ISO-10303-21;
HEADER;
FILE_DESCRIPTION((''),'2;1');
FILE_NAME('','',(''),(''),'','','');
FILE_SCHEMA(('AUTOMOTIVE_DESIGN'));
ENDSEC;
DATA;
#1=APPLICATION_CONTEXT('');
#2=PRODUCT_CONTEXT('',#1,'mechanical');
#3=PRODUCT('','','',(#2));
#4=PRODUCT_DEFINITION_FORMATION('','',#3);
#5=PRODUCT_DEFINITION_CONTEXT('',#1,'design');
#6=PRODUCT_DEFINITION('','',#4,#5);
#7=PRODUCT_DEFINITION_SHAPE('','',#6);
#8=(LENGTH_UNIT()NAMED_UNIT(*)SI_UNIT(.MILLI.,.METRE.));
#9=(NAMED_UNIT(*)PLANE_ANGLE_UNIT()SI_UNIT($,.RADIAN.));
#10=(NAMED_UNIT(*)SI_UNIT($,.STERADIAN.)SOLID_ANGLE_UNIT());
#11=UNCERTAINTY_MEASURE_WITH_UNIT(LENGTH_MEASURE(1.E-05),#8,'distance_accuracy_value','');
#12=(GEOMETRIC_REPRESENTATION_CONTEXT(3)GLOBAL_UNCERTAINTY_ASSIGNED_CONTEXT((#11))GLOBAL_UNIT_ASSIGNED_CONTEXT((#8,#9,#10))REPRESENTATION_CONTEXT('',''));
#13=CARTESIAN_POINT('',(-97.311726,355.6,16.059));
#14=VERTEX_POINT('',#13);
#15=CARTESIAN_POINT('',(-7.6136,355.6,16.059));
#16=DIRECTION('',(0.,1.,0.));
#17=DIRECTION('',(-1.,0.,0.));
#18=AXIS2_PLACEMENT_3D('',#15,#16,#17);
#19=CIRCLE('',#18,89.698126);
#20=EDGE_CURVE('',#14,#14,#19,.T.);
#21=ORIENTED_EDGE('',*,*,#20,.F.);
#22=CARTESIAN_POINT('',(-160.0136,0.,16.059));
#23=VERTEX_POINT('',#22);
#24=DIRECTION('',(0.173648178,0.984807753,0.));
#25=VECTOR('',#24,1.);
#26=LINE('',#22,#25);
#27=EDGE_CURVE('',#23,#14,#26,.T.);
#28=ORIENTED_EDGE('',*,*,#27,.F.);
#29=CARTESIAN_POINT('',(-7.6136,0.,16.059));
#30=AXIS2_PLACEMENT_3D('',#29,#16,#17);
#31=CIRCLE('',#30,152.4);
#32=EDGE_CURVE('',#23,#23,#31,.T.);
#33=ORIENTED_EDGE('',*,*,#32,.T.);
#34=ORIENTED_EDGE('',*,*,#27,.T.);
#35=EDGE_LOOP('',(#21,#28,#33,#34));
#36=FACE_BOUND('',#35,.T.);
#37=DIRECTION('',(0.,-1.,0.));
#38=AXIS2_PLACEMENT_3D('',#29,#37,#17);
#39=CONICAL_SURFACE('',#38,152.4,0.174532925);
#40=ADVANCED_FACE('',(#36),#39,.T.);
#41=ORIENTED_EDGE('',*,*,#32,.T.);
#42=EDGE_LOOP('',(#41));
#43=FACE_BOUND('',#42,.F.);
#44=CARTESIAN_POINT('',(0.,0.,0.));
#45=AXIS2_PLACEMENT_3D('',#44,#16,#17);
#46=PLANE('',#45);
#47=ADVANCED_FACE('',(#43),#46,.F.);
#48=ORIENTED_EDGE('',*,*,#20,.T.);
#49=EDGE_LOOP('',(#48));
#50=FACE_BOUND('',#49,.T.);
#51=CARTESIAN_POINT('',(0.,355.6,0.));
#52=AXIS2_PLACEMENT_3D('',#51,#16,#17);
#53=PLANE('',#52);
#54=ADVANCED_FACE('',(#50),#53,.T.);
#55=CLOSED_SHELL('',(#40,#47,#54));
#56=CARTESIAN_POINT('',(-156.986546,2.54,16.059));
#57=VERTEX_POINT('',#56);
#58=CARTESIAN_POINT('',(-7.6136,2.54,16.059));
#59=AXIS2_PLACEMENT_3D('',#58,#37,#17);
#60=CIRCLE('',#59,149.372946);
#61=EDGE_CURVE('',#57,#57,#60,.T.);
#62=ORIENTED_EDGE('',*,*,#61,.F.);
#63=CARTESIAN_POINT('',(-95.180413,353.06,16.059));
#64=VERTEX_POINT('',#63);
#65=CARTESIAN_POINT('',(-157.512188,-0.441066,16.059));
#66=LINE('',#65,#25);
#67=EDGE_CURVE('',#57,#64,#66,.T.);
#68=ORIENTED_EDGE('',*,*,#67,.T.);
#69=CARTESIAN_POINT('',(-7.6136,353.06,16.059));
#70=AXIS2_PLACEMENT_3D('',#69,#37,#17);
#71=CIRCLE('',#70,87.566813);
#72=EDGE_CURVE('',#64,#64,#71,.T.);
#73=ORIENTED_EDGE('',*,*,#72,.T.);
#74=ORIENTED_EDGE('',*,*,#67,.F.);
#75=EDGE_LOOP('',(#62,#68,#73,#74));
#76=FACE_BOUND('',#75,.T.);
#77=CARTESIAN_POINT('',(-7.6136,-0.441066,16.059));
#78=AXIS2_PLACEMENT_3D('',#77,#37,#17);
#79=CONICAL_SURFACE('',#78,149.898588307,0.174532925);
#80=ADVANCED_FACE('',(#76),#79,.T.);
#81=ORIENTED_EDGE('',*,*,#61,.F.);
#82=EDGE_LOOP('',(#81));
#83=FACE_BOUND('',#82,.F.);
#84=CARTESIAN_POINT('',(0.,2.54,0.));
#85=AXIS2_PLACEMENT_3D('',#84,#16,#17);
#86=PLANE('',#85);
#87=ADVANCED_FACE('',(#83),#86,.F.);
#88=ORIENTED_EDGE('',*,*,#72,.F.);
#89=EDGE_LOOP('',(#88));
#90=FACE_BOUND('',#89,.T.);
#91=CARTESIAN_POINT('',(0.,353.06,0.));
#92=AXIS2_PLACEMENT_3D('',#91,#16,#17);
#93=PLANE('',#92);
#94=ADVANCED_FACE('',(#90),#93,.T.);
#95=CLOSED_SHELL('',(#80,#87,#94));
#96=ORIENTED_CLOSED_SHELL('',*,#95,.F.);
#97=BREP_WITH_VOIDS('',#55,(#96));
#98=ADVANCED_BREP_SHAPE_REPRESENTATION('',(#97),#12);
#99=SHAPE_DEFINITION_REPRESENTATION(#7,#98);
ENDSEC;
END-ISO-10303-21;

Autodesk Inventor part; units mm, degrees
ref_plane "YZ Plane" through (0, 0, 0) normal (1, 0, 0) x (0, 1, 0)
ref_plane "XZ Plane" through (0, 0, 0) normal (0, 1, 0) x (-1, 0, 0)
ref_plane "XY Plane" through (0, 0, 0) normal (0, 0, 1) x (1, 0, 0)
sketch "Sketch1" plane through (0, 0, 0) normal (0, 1, 0) x (-1, 0, 0)
  circle A0 centre (7.6136, 16.059) radius 152.4
  point P0 (0, 0)
  dimension "d0" = 304.8
extrude "Extrusion1" add sketch "Sketch1" along normal blind 355.6 draft -10
shell "Shell1" thickness 2.54 removed faces 0
properties part number "Lamp shade"
